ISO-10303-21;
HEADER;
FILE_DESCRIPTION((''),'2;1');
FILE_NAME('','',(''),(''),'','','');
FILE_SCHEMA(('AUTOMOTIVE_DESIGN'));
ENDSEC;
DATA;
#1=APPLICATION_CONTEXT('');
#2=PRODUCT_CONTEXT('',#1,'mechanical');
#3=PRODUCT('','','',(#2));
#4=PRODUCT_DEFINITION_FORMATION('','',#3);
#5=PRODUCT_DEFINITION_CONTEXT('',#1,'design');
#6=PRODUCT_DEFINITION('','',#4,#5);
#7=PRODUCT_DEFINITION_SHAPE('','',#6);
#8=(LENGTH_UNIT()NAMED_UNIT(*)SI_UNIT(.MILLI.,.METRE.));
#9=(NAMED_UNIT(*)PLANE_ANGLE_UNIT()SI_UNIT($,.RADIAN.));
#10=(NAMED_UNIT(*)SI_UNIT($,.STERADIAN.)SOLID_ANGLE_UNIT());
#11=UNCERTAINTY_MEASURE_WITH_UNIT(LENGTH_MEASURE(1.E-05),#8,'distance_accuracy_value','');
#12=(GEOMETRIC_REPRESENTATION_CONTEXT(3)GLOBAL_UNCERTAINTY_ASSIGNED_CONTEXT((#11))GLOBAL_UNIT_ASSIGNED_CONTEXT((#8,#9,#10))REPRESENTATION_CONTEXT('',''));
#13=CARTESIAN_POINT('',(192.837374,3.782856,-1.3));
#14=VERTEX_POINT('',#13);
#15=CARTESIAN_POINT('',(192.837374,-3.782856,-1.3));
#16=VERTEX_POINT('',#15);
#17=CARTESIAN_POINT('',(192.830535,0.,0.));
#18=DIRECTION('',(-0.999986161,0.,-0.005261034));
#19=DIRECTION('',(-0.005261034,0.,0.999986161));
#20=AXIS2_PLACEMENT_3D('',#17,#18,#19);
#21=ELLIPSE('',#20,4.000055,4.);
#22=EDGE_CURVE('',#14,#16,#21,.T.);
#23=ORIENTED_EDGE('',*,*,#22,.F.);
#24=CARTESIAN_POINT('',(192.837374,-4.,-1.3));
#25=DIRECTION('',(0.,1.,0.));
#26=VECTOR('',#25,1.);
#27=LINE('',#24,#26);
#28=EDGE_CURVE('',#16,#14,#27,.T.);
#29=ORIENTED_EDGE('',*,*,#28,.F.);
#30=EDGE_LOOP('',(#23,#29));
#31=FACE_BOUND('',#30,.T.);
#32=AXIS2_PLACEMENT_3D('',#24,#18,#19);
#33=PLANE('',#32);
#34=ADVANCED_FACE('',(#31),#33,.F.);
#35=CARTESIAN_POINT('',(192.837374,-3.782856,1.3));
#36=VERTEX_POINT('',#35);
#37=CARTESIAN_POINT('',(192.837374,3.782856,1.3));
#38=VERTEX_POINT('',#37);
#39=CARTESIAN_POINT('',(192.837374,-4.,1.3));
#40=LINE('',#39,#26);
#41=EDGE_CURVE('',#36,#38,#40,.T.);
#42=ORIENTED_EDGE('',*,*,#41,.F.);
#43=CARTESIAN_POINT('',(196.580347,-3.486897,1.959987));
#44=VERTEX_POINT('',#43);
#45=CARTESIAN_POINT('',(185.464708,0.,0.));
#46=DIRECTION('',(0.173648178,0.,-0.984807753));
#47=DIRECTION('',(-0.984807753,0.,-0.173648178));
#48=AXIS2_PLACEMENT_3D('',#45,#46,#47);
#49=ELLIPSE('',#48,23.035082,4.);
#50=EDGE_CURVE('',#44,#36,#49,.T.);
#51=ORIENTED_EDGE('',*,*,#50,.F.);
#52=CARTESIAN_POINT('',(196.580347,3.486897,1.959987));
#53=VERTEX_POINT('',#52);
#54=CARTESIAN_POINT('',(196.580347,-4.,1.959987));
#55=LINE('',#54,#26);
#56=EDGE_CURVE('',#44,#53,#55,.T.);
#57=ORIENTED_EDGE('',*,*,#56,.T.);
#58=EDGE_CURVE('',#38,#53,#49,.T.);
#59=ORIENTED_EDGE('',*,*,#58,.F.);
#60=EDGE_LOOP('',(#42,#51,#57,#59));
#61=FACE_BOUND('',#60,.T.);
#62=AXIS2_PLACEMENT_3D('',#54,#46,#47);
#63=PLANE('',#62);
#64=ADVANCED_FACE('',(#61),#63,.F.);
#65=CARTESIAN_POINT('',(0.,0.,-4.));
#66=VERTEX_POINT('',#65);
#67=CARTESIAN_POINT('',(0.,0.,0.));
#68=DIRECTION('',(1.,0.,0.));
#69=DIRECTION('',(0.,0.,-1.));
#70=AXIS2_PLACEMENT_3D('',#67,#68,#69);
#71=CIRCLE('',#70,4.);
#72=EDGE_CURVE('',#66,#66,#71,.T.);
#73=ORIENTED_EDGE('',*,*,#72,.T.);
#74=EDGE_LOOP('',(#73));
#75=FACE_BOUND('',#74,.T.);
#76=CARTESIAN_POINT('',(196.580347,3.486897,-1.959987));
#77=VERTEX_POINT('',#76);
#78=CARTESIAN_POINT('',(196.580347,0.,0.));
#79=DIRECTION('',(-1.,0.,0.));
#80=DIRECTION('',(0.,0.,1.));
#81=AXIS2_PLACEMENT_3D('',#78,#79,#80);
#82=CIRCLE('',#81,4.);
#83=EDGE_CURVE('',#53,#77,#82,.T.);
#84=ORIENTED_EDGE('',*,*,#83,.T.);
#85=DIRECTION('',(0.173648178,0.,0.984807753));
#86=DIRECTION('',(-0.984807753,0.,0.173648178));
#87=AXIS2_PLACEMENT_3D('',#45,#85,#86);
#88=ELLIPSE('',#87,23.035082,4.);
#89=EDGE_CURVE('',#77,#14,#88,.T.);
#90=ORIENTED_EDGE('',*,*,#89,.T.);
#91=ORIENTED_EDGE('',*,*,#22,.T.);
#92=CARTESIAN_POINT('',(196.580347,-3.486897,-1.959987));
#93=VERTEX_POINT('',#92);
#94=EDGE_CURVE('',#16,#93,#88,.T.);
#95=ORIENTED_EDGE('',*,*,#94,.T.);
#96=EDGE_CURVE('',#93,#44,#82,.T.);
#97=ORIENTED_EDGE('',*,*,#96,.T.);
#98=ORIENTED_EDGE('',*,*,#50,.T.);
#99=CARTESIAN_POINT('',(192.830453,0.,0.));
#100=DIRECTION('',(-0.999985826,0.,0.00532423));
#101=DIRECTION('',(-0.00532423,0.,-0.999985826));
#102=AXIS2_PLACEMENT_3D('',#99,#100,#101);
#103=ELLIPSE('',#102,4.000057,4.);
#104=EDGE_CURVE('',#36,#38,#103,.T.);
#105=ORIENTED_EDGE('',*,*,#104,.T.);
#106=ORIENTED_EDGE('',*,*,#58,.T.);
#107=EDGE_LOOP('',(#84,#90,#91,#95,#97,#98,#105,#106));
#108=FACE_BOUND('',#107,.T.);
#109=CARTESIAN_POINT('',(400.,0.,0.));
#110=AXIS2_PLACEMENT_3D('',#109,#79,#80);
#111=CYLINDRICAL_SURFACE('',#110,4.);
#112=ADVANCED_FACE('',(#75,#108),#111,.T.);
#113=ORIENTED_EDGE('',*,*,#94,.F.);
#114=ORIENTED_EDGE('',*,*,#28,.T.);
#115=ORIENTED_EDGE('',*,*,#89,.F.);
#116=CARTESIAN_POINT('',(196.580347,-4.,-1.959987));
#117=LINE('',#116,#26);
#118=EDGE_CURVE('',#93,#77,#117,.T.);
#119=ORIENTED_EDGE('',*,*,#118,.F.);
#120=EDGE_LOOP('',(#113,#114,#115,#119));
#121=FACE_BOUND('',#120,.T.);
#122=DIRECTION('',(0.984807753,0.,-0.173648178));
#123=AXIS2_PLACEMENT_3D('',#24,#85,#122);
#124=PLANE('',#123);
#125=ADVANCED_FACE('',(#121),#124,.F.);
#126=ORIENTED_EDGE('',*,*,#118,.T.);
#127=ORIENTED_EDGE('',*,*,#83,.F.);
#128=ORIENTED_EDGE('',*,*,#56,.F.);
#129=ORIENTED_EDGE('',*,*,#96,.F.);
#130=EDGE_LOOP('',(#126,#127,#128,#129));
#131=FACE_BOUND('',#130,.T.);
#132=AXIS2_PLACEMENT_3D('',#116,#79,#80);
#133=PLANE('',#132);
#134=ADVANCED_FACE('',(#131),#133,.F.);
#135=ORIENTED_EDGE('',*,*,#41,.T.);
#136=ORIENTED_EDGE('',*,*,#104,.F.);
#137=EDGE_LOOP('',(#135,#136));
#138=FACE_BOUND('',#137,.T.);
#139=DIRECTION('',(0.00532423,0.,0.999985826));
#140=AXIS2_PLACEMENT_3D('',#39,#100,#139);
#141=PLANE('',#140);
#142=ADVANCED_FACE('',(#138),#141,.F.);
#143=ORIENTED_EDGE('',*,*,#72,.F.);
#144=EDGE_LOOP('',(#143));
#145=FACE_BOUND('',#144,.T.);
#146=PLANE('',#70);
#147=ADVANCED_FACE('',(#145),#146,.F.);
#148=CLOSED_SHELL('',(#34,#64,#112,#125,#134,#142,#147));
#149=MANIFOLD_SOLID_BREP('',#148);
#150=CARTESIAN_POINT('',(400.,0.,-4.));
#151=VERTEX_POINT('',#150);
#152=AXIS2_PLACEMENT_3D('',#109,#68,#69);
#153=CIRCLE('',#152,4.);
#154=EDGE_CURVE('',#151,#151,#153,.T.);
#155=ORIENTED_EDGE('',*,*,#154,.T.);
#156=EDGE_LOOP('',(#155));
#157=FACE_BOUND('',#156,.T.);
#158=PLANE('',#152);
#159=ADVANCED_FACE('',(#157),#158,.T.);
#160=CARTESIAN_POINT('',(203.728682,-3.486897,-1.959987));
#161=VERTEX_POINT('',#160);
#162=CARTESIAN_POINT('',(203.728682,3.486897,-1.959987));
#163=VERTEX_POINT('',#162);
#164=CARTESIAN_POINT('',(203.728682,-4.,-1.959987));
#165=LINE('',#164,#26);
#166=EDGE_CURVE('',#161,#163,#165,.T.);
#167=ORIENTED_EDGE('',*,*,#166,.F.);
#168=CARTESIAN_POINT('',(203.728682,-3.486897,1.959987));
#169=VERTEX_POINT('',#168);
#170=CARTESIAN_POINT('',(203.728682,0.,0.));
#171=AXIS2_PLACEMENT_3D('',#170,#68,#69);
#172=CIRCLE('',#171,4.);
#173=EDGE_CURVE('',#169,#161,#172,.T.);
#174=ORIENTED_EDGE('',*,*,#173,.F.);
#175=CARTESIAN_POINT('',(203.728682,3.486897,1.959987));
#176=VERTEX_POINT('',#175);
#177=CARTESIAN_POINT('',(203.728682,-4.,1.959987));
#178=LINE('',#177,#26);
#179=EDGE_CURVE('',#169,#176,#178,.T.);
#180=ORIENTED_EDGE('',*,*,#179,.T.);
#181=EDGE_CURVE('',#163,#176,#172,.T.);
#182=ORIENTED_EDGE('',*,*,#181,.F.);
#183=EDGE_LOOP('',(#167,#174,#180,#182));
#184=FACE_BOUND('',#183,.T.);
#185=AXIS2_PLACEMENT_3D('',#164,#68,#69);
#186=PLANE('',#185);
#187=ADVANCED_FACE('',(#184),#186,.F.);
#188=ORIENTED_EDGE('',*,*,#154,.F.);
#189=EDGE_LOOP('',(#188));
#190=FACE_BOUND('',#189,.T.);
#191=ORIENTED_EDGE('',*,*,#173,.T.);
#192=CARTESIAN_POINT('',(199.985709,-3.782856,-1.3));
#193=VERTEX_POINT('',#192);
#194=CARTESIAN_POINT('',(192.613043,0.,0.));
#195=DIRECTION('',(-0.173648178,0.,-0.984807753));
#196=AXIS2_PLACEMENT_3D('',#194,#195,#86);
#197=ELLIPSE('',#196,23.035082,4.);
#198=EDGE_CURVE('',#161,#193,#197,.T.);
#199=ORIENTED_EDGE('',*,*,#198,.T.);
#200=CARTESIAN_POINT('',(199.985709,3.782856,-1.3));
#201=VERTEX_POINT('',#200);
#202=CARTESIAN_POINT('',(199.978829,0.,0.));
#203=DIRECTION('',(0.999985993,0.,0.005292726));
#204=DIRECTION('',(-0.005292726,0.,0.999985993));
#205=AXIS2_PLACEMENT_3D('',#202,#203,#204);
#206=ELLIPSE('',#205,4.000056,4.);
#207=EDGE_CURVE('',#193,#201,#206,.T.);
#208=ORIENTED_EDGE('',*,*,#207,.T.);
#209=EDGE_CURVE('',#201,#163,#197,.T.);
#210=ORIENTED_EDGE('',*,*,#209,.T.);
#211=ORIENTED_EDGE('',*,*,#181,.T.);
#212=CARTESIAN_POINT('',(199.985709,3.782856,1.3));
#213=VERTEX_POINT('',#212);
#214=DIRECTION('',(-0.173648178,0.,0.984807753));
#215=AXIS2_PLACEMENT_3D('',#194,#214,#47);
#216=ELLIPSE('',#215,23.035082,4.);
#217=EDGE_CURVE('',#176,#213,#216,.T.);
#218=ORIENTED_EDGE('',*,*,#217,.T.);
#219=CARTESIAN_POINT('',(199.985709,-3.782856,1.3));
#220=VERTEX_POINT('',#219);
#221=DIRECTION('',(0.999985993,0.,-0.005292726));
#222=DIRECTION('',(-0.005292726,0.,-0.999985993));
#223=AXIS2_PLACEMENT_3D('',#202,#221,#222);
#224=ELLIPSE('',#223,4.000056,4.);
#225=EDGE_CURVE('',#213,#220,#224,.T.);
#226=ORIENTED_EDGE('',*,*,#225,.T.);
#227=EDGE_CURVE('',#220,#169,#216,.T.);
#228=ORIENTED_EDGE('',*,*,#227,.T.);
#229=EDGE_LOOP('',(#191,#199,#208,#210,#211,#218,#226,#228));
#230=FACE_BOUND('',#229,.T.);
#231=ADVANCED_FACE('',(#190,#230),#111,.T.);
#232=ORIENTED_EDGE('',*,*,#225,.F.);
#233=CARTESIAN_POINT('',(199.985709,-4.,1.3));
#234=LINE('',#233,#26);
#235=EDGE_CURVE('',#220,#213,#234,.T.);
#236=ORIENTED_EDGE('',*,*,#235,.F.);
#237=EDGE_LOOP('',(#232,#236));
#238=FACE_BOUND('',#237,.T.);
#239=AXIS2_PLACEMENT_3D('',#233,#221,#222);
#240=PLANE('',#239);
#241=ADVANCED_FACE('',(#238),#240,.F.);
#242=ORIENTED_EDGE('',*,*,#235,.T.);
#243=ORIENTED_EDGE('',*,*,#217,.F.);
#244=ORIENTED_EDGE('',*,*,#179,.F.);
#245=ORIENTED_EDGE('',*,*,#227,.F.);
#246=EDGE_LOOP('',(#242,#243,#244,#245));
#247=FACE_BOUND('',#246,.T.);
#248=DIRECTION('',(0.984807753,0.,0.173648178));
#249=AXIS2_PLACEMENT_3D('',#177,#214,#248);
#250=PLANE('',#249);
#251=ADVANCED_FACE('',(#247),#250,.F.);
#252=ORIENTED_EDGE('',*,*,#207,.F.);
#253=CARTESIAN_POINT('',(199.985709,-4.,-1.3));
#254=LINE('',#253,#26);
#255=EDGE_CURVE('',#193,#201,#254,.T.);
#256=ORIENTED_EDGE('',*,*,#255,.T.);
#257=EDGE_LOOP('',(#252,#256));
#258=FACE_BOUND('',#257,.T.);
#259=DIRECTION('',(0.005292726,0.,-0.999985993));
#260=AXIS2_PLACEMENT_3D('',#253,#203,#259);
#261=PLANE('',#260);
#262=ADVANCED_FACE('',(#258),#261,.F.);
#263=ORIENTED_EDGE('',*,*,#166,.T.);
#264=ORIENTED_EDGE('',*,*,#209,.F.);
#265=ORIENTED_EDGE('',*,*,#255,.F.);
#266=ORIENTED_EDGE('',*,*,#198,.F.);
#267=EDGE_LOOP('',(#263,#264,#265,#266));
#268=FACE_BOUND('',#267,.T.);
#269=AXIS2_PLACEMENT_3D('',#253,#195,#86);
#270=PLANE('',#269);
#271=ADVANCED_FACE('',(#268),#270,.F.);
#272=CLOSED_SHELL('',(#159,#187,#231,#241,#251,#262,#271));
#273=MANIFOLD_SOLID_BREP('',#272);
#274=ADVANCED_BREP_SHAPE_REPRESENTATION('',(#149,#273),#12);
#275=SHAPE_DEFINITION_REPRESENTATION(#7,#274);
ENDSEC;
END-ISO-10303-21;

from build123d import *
from OCP.BRepAlgoAPI import BRepAlgoAPI_Cut
from OCP.TopTools import TopTools_ListOfShape

# Parameters (mm, degrees)
SKETCH1_R               = 4
BOSS_EXTRUDE1_DEPTH     = 400
CUT_EXTRUDE3_DEPTH      = 401.039998
CUT_EXTRUDE3_DEPTH_BACK = 401.039998


with BuildPart() as part:
    # Sketch1 → Boss-Extrude1 (new body)
    with BuildSketch(Plane(origin=(0, 0, 0), x_dir=(0, 0, -1), z_dir=(1, 0, 0))):
        Circle(SKETCH1_R)
    extrude(amount=BOSS_EXTRUDE1_DEPTH)


with BuildPart() as cut_extrude3_tool:
    # Sketch2 → Cut-Extrude3 (new, two sides: drawn at the far end of the back side and taken through both)
    with BuildSketch(Plane(origin=(0, 0, 0), x_dir=(1, 0, 0), z_dir=(0, 1, 0)).offset(-CUT_EXTRUDE3_DEPTH_BACK)):
        Polygon((199.985709439, 1.3), (200, 4), (192.851579286, 4.000000452), (192.837374297, 1.3), (196.580346974, 1.959987071), (196.580346974, -1.959987071), (192.837374297, -1.3), (192.851749918, -3.999999548), (200, -4), (199.985709439, -1.3), (203.728682116, -1.959987071), (203.728682116, 1.959987071), align=None)
    extrude(amount=CUT_EXTRUDE3_DEPTH + CUT_EXTRUDE3_DEPTH_BACK)


with BuildPart() as part_1:
    add(part.part)

    # Cut-Extrude3: cut by cut_extrude3_tool, with a tolerance
    cut_extrude3_stock = TopTools_ListOfShape()
    cut_extrude3_stock.Append(part_1.part.wrapped)
    cut_extrude3_tools = TopTools_ListOfShape()
    cut_extrude3_tools.Append(cut_extrude3_tool.part.wrapped)
    cut_extrude3_cut = BRepAlgoAPI_Cut()
    cut_extrude3_cut.SetArguments(cut_extrude3_stock)
    cut_extrude3_cut.SetTools(cut_extrude3_tools)
    cut_extrude3_cut.SetFuzzyValue(0.00001)
    cut_extrude3_cut.Build()
    add(Compound.cast(cut_extrude3_cut.Shape()).solids(), mode=Mode.REPLACE)


with BuildPart() as cut_extrude3_piece_1:
    # of the separate pieces the step leaves, piece 1, a body of its own (cut_extrude3_pieces)
    add(part_1.part.solids().sort_by_distance((199.985709439, 3.782856064, -1.3))[0])


with BuildPart() as cut_extrude3_piece_2:
    # of the separate pieces the step leaves, piece 2, a body of its own (cut_extrude3_pieces)
    add(part_1.part.solids().sort_by_distance((0, 0, -4))[0])


solid = Compound([cut_extrude3_piece_1.part, cut_extrude3_piece_2.part])
